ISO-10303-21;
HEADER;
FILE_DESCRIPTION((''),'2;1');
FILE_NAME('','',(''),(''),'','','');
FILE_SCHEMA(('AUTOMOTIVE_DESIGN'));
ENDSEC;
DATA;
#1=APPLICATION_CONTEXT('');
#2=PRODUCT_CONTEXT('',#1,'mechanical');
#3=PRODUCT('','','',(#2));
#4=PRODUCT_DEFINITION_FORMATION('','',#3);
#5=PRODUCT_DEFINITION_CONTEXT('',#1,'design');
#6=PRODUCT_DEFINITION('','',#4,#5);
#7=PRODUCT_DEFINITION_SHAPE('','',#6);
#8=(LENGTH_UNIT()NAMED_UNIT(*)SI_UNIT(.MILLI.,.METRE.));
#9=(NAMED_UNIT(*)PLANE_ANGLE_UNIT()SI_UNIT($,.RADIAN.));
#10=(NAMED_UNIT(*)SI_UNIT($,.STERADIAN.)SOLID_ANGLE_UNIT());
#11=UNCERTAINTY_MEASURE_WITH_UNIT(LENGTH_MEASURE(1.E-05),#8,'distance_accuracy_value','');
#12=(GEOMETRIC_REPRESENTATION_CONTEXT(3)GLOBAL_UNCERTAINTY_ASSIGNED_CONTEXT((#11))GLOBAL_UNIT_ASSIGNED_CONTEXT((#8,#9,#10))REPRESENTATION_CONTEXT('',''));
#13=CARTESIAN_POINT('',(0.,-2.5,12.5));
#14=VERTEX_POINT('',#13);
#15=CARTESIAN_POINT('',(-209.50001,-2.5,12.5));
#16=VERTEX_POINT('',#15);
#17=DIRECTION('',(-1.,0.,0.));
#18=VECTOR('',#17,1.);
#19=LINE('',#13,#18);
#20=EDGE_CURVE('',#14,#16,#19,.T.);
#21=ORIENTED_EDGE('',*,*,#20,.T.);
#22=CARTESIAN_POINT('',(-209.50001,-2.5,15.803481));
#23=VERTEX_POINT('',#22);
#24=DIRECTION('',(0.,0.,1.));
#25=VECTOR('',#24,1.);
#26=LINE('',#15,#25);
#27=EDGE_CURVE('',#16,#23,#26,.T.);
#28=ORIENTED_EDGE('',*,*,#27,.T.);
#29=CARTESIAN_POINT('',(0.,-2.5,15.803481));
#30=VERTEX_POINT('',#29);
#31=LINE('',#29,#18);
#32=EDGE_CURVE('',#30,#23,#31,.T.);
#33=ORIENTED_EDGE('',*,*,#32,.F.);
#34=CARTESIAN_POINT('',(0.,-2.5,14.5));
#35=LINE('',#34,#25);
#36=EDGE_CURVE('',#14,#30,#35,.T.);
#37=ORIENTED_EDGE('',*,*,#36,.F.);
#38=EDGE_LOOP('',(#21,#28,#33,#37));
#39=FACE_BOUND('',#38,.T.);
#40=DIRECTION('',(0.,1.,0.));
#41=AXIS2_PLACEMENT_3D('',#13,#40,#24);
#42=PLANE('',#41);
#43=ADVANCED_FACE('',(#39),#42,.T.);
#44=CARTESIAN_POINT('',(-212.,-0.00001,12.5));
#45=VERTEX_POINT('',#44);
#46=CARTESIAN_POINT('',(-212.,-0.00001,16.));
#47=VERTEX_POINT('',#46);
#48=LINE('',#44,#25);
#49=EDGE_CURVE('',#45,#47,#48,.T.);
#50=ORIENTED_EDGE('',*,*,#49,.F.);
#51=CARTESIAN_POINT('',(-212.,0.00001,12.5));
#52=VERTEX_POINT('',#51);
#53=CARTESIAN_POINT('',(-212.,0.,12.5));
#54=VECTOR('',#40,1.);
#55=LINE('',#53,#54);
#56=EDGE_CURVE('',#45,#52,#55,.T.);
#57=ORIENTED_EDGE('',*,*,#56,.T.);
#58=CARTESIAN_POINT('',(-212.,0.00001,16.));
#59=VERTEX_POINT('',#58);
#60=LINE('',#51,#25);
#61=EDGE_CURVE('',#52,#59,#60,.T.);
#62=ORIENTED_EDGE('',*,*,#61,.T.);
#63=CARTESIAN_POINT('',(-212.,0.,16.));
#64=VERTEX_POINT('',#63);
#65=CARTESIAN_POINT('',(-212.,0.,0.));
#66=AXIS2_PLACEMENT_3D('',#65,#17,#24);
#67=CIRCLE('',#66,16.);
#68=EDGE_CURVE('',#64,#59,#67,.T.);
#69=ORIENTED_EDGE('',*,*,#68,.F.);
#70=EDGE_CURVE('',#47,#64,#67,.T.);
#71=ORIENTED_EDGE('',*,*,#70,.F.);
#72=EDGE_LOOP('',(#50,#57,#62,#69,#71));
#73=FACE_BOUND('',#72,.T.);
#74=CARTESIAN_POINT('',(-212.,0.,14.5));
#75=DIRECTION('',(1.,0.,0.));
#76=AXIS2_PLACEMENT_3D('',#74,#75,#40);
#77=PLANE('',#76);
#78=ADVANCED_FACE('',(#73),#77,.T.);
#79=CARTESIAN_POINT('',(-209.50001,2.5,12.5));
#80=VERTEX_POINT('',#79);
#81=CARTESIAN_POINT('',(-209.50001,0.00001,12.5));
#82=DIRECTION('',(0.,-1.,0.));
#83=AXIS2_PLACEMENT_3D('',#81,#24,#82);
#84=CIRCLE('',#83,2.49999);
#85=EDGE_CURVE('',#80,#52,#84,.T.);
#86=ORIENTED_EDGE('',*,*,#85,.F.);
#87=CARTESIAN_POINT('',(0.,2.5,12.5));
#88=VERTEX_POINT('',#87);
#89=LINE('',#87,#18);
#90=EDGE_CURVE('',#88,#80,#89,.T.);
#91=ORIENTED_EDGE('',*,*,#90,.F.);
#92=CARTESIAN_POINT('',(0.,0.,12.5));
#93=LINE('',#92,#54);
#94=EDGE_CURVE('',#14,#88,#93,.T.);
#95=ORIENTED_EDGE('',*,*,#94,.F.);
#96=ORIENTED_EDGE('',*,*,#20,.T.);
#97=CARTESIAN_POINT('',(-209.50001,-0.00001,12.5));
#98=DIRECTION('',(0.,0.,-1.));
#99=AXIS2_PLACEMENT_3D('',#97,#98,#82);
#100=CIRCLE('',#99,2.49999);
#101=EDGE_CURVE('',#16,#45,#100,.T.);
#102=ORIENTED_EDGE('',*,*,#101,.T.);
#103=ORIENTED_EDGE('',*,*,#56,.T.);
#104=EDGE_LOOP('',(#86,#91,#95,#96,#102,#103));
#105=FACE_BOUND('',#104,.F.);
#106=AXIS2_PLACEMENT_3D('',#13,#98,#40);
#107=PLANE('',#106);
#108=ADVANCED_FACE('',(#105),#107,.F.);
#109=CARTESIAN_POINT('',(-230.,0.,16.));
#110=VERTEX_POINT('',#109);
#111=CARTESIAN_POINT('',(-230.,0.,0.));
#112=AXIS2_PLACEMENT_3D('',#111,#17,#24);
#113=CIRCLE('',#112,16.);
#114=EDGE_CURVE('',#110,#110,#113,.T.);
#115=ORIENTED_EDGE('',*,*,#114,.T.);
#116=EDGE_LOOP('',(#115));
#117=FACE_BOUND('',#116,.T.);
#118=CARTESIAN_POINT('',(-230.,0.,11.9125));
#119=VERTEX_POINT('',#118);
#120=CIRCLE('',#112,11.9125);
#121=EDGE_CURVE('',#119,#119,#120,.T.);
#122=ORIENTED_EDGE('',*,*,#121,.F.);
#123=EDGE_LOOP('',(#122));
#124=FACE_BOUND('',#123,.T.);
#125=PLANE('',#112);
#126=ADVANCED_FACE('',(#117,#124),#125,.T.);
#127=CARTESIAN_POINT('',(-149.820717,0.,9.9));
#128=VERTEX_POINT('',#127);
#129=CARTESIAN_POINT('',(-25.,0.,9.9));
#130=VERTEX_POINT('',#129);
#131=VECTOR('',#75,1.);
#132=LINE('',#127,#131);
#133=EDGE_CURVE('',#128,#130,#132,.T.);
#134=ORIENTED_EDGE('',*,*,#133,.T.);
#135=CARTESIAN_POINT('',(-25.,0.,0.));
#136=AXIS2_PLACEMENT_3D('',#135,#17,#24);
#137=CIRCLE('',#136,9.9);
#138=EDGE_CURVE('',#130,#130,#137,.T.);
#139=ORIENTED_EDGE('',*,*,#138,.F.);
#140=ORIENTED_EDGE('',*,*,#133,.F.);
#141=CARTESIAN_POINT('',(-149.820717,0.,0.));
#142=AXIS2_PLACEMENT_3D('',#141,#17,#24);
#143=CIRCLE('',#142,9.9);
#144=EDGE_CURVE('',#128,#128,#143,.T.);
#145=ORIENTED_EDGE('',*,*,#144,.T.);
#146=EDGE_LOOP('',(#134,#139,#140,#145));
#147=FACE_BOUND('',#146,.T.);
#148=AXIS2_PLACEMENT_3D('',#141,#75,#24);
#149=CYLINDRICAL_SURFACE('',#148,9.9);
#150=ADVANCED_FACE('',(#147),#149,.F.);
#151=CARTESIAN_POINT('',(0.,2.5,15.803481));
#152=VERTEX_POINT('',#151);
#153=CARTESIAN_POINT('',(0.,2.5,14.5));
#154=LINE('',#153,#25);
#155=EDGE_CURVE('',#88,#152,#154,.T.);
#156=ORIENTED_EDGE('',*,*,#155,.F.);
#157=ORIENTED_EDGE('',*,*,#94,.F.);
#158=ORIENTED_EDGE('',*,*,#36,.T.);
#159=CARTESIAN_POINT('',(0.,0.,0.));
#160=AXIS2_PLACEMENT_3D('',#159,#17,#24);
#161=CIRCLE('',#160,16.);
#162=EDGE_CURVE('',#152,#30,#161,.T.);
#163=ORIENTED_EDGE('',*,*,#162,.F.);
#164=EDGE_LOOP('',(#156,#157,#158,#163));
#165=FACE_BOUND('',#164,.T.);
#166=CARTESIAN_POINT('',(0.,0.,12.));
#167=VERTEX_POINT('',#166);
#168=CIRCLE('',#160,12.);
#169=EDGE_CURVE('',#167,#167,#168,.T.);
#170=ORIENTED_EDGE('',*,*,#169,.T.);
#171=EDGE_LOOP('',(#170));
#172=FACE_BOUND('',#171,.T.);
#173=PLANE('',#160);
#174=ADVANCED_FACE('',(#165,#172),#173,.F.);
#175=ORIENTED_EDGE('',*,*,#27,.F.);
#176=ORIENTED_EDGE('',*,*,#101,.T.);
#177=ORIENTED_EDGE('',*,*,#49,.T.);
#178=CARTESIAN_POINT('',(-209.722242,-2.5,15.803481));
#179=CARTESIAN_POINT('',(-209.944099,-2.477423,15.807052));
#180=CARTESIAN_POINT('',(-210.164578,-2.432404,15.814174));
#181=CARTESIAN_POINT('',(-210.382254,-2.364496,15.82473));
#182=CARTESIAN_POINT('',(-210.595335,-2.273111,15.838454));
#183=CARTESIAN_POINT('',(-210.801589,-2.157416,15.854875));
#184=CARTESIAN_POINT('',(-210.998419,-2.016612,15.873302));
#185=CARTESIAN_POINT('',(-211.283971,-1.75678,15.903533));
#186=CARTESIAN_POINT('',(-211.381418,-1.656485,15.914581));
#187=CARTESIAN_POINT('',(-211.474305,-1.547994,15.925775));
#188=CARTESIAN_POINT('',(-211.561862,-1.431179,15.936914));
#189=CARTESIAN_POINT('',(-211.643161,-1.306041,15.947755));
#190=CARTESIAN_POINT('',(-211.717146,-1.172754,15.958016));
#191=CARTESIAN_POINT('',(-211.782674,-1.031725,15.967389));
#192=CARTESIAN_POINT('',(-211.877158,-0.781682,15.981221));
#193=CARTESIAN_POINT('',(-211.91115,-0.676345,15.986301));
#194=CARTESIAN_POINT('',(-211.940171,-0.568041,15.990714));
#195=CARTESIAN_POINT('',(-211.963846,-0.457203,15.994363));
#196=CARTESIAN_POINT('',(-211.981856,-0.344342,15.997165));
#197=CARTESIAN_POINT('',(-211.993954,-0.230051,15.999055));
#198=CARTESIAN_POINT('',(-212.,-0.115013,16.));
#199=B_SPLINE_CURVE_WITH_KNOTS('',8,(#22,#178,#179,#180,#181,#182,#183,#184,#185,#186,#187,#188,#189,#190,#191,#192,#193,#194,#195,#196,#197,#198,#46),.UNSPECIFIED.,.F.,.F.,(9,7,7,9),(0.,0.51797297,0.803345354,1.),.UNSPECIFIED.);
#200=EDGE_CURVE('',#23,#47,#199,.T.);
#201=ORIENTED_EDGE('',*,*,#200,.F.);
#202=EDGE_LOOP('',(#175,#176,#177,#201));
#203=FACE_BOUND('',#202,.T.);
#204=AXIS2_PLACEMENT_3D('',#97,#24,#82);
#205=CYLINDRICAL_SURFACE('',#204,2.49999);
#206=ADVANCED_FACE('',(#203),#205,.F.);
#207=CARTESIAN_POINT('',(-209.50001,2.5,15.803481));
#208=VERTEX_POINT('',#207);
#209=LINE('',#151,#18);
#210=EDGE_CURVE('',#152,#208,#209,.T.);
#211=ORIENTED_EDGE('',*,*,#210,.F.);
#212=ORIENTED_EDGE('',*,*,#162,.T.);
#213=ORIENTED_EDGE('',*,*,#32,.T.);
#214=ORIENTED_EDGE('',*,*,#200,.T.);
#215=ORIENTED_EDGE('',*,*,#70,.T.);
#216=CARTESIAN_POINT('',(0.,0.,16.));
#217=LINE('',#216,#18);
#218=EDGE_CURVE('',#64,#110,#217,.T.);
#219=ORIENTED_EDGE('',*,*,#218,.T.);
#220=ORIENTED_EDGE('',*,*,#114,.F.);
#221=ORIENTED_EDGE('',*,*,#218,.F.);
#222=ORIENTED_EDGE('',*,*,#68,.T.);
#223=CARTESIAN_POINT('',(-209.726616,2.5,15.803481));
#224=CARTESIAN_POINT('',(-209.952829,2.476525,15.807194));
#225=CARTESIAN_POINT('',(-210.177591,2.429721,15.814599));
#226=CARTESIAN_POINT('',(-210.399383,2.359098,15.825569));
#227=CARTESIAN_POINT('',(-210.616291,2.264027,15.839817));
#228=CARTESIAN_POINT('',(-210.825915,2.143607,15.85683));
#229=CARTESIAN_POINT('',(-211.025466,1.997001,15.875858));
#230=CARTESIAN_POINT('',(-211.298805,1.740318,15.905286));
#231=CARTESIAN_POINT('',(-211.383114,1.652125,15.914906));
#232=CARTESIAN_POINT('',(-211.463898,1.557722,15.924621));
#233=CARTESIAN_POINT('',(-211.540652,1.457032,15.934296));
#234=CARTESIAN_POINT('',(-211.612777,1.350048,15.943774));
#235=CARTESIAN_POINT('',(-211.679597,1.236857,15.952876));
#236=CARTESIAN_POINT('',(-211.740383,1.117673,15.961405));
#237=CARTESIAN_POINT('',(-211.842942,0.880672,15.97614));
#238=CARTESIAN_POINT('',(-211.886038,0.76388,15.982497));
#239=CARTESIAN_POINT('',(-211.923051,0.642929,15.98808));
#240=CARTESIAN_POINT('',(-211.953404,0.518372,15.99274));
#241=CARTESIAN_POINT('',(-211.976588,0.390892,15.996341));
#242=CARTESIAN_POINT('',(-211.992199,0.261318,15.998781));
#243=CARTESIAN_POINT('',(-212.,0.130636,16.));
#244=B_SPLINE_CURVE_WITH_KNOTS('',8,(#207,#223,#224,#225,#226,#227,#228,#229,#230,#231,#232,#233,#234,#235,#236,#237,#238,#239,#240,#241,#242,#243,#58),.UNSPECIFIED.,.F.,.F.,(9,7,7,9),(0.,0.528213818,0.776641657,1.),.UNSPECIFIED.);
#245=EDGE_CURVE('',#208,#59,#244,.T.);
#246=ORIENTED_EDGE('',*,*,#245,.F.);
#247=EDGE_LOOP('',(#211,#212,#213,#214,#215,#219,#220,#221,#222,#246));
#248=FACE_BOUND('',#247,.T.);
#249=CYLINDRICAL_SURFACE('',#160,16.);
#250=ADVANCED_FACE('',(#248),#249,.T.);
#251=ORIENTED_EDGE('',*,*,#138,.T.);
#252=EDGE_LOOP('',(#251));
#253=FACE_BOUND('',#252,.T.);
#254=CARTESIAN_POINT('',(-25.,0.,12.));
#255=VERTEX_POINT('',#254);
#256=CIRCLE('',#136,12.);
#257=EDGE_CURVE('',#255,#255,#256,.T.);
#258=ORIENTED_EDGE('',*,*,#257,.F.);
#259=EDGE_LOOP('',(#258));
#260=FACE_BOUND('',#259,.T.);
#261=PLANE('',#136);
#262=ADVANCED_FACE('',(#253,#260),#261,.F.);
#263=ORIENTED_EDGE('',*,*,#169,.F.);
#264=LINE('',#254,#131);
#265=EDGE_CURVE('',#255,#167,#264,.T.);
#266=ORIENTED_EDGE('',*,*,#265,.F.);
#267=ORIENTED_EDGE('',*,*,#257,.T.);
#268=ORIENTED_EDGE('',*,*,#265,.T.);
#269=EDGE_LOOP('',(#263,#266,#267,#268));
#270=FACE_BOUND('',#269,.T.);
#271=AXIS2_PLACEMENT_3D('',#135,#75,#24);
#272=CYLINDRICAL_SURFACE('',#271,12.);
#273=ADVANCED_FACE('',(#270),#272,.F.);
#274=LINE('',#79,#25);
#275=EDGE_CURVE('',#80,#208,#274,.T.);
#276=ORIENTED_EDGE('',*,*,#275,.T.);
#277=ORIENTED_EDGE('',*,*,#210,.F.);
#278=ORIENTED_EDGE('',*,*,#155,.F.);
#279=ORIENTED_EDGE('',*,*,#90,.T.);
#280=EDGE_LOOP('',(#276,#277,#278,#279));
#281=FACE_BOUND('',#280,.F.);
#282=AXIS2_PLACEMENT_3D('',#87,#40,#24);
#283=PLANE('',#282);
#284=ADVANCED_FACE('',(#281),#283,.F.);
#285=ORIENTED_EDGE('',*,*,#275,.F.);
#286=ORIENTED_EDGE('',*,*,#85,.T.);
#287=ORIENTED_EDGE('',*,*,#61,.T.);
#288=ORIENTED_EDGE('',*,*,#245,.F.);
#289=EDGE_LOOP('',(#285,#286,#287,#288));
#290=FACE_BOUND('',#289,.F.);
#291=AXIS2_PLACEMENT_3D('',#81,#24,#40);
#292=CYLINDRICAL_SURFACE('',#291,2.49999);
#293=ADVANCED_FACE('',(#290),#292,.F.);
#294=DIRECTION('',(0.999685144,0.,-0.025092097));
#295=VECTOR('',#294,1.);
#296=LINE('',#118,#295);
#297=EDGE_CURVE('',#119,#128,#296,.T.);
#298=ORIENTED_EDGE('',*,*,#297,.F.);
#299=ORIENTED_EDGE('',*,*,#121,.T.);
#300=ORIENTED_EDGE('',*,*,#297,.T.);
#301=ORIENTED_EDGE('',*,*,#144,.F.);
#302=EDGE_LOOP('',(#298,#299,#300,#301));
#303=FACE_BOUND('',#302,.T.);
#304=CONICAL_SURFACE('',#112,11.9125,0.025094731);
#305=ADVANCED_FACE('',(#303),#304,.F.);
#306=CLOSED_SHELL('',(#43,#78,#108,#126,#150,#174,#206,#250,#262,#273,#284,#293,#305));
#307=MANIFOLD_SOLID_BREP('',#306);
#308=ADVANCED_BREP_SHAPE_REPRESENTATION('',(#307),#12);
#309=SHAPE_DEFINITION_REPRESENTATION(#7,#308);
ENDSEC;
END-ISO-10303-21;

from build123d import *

# Parameters (mm, degrees)
F2_W     = 5
F2_H     = 4
F3_DEPTH = 212
F4_R     = 2.49999


# Not quite as in the source:
# - a fillet or chamfer is up to 0.001 mm smaller than in the source, because OpenCascade refuses the exact size
# - a feature names something its author has since deleted; it is built from what else it names


with BuildPart() as f1:
    # F0 (on Front) → F1 (revolve)
    with BuildSketch(Plane.XZ):
        Polygon((0, 12), (0, 16), (-230, 16), (-230, 11.9125), (-149.8207171315, 9.9), (-25, 9.9), (-25, 12), align=None)
    revolve(axis=Axis((-16.2521931838, 0, 0), (-1, 0, 0)))

    # F2 (on Right) → F3 (cut)
    with BuildSketch(Plane.YZ):
        with Locations((0, 14.5)):
            Rectangle(F2_W, F2_H)
    extrude(amount=-F3_DEPTH, mode=Mode.SUBTRACT)

    # F4 (radius 2.5 in the source; OpenCascade refuses exactly that, so slightly less here)
    f4_edges = [f1.edges().sort_by_distance(p)[0] for p in [
        (-212, 2.5, 14.15174),
        (-212, -2.5, 14.15174),
    ]]
    fillet(f4_edges, radius=F4_R)


solid = f1.part
